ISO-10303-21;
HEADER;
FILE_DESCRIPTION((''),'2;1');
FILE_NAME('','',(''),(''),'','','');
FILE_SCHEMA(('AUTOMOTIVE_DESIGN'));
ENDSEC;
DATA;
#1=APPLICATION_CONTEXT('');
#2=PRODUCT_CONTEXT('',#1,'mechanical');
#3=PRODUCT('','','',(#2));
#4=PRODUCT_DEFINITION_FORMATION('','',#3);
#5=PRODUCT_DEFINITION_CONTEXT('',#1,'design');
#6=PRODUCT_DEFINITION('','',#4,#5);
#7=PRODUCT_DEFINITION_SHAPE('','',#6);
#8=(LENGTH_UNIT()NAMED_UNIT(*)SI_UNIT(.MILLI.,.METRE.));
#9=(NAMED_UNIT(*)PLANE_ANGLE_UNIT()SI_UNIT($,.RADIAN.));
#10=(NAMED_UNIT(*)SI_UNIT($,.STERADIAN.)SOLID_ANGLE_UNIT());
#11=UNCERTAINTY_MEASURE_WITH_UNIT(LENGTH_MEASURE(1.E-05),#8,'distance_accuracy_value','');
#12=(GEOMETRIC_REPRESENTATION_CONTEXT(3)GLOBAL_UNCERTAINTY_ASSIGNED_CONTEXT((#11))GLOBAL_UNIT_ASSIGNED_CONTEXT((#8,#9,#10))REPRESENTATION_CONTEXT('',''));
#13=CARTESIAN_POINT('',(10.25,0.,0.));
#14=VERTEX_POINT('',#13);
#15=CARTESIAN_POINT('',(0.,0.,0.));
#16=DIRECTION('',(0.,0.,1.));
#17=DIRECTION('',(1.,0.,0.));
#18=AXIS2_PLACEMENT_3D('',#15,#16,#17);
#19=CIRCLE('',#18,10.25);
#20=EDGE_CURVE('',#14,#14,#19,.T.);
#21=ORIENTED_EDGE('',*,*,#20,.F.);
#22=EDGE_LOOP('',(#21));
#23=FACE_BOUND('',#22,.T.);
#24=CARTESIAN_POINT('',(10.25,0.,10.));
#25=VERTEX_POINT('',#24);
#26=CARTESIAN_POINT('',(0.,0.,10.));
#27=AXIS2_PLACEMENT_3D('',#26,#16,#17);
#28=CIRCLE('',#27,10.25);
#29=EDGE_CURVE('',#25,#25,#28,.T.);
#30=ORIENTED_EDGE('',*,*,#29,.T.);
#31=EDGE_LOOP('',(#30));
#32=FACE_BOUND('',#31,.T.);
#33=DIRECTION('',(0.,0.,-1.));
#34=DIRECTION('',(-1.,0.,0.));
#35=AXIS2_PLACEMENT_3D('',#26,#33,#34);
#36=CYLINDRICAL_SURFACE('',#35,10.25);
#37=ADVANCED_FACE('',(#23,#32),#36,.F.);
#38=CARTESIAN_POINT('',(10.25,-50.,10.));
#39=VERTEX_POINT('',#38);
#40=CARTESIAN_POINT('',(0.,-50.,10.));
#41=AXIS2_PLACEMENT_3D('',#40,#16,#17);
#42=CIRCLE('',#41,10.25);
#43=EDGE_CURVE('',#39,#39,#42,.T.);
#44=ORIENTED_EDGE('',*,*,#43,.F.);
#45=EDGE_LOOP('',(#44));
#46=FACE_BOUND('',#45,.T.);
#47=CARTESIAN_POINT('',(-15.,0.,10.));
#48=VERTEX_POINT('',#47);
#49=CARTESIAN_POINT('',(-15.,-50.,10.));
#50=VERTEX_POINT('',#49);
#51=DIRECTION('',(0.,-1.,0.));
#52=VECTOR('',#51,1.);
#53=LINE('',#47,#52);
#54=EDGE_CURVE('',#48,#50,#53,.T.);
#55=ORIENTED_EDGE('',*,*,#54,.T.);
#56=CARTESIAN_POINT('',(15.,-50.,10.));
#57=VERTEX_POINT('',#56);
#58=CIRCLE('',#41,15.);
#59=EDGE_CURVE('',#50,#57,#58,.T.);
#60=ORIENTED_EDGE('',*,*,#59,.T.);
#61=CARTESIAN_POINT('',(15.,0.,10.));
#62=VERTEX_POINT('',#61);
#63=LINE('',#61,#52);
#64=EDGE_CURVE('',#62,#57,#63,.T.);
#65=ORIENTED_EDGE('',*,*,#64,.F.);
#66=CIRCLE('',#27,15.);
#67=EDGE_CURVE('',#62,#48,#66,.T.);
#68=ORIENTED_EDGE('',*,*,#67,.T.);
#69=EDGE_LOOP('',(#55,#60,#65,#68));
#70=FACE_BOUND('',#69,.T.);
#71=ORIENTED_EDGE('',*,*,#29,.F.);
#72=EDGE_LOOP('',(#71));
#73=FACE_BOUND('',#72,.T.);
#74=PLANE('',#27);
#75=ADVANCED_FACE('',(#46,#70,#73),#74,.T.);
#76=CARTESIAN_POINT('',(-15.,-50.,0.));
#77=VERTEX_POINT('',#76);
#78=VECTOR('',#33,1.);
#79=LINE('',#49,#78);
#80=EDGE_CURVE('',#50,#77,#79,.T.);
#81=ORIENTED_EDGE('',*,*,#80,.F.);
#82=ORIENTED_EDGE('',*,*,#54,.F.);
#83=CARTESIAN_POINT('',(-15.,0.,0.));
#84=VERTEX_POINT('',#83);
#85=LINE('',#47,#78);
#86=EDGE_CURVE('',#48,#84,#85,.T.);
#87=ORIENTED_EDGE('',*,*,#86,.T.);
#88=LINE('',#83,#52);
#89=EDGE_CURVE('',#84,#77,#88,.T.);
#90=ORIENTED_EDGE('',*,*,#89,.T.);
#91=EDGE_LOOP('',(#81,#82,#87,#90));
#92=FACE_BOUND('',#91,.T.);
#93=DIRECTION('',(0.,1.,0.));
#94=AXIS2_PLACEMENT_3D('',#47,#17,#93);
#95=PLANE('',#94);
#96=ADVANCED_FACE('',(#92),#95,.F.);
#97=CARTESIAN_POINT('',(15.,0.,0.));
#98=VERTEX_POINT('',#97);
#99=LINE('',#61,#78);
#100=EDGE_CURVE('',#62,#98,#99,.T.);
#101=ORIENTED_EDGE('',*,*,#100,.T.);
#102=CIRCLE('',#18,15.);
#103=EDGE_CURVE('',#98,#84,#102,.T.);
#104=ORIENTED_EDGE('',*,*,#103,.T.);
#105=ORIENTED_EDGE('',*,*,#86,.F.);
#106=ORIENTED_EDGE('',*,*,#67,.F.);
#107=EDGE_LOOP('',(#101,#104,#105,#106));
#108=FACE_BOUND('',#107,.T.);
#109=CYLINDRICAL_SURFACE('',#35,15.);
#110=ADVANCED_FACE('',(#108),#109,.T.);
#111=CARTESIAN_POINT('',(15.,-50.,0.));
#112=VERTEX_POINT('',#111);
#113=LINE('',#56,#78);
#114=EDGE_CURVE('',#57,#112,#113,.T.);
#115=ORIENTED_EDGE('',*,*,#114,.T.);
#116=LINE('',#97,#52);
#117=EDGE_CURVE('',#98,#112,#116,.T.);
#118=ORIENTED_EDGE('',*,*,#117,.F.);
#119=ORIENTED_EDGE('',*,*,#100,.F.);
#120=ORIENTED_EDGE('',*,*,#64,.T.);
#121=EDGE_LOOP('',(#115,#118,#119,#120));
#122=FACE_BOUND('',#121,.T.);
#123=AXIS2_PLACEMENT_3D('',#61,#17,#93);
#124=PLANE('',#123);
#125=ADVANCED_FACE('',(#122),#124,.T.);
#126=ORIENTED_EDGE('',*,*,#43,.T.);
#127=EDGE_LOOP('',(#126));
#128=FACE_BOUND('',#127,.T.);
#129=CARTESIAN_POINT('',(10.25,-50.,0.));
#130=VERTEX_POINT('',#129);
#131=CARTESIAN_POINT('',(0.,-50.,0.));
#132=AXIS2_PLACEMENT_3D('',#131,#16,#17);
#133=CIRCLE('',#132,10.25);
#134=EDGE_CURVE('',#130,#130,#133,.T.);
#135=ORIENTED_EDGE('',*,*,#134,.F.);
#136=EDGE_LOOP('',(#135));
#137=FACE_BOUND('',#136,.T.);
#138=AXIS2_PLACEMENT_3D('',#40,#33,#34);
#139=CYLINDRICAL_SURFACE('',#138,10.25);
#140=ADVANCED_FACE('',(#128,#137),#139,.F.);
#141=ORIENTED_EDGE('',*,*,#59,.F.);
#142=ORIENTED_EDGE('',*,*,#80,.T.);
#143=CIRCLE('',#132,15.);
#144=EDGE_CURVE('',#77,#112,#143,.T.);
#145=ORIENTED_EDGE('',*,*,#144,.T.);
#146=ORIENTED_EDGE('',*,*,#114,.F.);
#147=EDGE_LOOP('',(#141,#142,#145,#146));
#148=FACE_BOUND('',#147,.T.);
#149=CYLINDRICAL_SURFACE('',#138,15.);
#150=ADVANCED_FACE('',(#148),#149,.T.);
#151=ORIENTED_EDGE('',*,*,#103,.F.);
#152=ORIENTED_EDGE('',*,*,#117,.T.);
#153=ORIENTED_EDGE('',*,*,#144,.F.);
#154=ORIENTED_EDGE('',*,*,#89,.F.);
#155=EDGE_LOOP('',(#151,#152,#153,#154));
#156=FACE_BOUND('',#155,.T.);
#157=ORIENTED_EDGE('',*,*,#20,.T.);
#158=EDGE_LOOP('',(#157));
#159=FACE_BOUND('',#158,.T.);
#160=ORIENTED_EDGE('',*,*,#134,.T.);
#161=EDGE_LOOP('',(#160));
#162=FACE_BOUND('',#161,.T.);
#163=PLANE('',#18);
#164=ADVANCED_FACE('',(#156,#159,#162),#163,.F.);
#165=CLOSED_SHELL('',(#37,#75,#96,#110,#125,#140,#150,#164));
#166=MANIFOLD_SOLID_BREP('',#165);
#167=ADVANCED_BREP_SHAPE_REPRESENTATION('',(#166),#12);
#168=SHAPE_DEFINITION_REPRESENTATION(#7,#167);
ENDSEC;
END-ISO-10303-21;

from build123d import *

# Parameters (mm, degrees)
SKETCH1_R           = 10.25
BOSS_EXTRUDE1_DEPTH = 10


with BuildPart() as part:
    # Sketch1 → Boss-Extrude1 (new body)
    with BuildSketch(Plane.XY):
        with BuildLine():
            Line((15, -50), (15, 0))
            ThreePointArc((15, 0), (0, 15), (-15, 0))
            Line((-15, 0), (-15, -50))
            ThreePointArc((-15, -50), (0, -65), (15, -50))
        make_face()
        with Locations((0, -50)):
            Circle(SKETCH1_R, mode=Mode.SUBTRACT)
        Circle(SKETCH1_R, mode=Mode.SUBTRACT)
    extrude(amount=BOSS_EXTRUDE1_DEPTH)


solid = part.part
